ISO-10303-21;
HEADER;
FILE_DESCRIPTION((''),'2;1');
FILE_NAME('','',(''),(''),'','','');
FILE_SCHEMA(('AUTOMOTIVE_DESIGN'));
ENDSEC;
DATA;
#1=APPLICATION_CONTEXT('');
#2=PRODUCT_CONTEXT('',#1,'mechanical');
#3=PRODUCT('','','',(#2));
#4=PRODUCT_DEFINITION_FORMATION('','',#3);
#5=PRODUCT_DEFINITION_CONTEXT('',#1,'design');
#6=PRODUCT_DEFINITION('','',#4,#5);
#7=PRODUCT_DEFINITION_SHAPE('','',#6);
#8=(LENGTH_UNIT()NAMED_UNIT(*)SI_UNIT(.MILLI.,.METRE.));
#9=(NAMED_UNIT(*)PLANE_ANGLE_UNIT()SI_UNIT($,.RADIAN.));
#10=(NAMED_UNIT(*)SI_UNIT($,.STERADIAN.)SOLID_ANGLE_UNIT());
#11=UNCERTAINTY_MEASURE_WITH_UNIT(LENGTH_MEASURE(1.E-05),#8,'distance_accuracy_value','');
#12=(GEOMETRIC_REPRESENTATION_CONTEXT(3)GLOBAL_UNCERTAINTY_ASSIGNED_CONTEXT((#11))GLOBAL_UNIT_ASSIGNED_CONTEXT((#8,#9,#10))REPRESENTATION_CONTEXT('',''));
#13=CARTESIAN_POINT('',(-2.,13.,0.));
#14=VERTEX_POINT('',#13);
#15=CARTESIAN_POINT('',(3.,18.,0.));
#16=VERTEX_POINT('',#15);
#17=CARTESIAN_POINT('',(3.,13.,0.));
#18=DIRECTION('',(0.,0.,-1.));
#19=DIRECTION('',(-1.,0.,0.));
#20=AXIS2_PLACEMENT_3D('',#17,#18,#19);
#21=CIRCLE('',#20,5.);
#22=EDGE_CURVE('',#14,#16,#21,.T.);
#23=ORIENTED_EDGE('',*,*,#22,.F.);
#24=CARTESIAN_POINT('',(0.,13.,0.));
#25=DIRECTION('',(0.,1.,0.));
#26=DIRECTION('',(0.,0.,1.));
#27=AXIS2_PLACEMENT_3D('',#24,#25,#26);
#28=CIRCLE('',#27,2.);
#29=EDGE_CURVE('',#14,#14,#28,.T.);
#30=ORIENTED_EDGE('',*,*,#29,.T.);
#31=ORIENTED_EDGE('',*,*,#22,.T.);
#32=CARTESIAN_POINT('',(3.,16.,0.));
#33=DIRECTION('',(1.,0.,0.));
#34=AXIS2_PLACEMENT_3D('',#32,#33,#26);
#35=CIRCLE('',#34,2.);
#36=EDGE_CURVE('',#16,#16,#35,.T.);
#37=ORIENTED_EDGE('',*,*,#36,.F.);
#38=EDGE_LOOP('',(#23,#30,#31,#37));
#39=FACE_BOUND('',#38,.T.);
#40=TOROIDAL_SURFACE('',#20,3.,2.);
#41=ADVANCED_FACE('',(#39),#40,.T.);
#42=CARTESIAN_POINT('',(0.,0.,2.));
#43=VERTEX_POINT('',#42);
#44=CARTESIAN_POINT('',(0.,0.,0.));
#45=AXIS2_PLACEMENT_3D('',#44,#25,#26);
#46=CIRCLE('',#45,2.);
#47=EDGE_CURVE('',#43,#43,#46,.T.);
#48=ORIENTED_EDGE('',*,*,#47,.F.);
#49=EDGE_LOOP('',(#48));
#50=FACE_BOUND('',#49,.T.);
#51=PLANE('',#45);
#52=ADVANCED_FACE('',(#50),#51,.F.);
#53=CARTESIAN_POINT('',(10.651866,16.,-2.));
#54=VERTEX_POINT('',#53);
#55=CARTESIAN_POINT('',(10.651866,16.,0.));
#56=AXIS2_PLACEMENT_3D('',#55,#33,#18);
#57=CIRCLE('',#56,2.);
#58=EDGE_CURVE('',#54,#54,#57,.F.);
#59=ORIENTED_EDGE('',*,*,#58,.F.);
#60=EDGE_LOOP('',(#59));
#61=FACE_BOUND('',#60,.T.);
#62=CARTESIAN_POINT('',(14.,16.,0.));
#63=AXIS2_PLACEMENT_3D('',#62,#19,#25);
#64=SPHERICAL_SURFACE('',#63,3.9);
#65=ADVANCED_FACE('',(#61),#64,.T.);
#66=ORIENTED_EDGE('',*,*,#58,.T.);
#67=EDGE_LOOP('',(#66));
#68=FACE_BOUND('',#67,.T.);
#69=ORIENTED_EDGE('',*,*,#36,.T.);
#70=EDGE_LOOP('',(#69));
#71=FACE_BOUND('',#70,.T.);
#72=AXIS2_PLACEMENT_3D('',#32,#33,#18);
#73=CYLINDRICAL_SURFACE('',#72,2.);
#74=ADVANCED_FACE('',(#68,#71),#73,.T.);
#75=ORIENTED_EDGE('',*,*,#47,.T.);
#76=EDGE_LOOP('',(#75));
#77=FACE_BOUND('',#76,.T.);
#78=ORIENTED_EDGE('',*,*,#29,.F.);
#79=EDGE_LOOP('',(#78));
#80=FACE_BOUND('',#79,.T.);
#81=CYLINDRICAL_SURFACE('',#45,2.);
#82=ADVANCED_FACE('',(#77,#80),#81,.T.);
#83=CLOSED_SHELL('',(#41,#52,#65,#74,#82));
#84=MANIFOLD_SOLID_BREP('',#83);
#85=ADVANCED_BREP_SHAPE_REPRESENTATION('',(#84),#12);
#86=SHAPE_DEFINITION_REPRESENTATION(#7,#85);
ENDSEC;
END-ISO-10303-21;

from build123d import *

# Parameters (mm, degrees)
SKETCH1_R = 2


with BuildPart() as part:
    # Sweep1: sweep along a path in Sketch3
    with BuildLine(Plane.XY) as sweep1_path:
        Line((0, 0), (0, 13))
        ThreePointArc((0, 13), (0.878679656, 15.121320344), (3, 16))
        Line((3, 16), (14, 16))
    # Sketch1 → Sweep1 (sweep)
    with BuildSketch(Plane(origin=(0, 0, 0), x_dir=(1, 0, 0), z_dir=(0, 1, 0))):
        Circle(SKETCH1_R)
    sweep(path=sweep1_path.line)

    # Sketch4 → Revolve1 (revolve)
    with BuildSketch(Plane.XY):
        with BuildLine():
            ThreePointArc((17.9, 16), (14, 19.9), (10.1, 16))
            Line((10.1, 16), (17.9, 16))
        make_face()
    revolve(axis=Axis((10.1, 16, 0), (1, 0, 0)))


solid = part.part
